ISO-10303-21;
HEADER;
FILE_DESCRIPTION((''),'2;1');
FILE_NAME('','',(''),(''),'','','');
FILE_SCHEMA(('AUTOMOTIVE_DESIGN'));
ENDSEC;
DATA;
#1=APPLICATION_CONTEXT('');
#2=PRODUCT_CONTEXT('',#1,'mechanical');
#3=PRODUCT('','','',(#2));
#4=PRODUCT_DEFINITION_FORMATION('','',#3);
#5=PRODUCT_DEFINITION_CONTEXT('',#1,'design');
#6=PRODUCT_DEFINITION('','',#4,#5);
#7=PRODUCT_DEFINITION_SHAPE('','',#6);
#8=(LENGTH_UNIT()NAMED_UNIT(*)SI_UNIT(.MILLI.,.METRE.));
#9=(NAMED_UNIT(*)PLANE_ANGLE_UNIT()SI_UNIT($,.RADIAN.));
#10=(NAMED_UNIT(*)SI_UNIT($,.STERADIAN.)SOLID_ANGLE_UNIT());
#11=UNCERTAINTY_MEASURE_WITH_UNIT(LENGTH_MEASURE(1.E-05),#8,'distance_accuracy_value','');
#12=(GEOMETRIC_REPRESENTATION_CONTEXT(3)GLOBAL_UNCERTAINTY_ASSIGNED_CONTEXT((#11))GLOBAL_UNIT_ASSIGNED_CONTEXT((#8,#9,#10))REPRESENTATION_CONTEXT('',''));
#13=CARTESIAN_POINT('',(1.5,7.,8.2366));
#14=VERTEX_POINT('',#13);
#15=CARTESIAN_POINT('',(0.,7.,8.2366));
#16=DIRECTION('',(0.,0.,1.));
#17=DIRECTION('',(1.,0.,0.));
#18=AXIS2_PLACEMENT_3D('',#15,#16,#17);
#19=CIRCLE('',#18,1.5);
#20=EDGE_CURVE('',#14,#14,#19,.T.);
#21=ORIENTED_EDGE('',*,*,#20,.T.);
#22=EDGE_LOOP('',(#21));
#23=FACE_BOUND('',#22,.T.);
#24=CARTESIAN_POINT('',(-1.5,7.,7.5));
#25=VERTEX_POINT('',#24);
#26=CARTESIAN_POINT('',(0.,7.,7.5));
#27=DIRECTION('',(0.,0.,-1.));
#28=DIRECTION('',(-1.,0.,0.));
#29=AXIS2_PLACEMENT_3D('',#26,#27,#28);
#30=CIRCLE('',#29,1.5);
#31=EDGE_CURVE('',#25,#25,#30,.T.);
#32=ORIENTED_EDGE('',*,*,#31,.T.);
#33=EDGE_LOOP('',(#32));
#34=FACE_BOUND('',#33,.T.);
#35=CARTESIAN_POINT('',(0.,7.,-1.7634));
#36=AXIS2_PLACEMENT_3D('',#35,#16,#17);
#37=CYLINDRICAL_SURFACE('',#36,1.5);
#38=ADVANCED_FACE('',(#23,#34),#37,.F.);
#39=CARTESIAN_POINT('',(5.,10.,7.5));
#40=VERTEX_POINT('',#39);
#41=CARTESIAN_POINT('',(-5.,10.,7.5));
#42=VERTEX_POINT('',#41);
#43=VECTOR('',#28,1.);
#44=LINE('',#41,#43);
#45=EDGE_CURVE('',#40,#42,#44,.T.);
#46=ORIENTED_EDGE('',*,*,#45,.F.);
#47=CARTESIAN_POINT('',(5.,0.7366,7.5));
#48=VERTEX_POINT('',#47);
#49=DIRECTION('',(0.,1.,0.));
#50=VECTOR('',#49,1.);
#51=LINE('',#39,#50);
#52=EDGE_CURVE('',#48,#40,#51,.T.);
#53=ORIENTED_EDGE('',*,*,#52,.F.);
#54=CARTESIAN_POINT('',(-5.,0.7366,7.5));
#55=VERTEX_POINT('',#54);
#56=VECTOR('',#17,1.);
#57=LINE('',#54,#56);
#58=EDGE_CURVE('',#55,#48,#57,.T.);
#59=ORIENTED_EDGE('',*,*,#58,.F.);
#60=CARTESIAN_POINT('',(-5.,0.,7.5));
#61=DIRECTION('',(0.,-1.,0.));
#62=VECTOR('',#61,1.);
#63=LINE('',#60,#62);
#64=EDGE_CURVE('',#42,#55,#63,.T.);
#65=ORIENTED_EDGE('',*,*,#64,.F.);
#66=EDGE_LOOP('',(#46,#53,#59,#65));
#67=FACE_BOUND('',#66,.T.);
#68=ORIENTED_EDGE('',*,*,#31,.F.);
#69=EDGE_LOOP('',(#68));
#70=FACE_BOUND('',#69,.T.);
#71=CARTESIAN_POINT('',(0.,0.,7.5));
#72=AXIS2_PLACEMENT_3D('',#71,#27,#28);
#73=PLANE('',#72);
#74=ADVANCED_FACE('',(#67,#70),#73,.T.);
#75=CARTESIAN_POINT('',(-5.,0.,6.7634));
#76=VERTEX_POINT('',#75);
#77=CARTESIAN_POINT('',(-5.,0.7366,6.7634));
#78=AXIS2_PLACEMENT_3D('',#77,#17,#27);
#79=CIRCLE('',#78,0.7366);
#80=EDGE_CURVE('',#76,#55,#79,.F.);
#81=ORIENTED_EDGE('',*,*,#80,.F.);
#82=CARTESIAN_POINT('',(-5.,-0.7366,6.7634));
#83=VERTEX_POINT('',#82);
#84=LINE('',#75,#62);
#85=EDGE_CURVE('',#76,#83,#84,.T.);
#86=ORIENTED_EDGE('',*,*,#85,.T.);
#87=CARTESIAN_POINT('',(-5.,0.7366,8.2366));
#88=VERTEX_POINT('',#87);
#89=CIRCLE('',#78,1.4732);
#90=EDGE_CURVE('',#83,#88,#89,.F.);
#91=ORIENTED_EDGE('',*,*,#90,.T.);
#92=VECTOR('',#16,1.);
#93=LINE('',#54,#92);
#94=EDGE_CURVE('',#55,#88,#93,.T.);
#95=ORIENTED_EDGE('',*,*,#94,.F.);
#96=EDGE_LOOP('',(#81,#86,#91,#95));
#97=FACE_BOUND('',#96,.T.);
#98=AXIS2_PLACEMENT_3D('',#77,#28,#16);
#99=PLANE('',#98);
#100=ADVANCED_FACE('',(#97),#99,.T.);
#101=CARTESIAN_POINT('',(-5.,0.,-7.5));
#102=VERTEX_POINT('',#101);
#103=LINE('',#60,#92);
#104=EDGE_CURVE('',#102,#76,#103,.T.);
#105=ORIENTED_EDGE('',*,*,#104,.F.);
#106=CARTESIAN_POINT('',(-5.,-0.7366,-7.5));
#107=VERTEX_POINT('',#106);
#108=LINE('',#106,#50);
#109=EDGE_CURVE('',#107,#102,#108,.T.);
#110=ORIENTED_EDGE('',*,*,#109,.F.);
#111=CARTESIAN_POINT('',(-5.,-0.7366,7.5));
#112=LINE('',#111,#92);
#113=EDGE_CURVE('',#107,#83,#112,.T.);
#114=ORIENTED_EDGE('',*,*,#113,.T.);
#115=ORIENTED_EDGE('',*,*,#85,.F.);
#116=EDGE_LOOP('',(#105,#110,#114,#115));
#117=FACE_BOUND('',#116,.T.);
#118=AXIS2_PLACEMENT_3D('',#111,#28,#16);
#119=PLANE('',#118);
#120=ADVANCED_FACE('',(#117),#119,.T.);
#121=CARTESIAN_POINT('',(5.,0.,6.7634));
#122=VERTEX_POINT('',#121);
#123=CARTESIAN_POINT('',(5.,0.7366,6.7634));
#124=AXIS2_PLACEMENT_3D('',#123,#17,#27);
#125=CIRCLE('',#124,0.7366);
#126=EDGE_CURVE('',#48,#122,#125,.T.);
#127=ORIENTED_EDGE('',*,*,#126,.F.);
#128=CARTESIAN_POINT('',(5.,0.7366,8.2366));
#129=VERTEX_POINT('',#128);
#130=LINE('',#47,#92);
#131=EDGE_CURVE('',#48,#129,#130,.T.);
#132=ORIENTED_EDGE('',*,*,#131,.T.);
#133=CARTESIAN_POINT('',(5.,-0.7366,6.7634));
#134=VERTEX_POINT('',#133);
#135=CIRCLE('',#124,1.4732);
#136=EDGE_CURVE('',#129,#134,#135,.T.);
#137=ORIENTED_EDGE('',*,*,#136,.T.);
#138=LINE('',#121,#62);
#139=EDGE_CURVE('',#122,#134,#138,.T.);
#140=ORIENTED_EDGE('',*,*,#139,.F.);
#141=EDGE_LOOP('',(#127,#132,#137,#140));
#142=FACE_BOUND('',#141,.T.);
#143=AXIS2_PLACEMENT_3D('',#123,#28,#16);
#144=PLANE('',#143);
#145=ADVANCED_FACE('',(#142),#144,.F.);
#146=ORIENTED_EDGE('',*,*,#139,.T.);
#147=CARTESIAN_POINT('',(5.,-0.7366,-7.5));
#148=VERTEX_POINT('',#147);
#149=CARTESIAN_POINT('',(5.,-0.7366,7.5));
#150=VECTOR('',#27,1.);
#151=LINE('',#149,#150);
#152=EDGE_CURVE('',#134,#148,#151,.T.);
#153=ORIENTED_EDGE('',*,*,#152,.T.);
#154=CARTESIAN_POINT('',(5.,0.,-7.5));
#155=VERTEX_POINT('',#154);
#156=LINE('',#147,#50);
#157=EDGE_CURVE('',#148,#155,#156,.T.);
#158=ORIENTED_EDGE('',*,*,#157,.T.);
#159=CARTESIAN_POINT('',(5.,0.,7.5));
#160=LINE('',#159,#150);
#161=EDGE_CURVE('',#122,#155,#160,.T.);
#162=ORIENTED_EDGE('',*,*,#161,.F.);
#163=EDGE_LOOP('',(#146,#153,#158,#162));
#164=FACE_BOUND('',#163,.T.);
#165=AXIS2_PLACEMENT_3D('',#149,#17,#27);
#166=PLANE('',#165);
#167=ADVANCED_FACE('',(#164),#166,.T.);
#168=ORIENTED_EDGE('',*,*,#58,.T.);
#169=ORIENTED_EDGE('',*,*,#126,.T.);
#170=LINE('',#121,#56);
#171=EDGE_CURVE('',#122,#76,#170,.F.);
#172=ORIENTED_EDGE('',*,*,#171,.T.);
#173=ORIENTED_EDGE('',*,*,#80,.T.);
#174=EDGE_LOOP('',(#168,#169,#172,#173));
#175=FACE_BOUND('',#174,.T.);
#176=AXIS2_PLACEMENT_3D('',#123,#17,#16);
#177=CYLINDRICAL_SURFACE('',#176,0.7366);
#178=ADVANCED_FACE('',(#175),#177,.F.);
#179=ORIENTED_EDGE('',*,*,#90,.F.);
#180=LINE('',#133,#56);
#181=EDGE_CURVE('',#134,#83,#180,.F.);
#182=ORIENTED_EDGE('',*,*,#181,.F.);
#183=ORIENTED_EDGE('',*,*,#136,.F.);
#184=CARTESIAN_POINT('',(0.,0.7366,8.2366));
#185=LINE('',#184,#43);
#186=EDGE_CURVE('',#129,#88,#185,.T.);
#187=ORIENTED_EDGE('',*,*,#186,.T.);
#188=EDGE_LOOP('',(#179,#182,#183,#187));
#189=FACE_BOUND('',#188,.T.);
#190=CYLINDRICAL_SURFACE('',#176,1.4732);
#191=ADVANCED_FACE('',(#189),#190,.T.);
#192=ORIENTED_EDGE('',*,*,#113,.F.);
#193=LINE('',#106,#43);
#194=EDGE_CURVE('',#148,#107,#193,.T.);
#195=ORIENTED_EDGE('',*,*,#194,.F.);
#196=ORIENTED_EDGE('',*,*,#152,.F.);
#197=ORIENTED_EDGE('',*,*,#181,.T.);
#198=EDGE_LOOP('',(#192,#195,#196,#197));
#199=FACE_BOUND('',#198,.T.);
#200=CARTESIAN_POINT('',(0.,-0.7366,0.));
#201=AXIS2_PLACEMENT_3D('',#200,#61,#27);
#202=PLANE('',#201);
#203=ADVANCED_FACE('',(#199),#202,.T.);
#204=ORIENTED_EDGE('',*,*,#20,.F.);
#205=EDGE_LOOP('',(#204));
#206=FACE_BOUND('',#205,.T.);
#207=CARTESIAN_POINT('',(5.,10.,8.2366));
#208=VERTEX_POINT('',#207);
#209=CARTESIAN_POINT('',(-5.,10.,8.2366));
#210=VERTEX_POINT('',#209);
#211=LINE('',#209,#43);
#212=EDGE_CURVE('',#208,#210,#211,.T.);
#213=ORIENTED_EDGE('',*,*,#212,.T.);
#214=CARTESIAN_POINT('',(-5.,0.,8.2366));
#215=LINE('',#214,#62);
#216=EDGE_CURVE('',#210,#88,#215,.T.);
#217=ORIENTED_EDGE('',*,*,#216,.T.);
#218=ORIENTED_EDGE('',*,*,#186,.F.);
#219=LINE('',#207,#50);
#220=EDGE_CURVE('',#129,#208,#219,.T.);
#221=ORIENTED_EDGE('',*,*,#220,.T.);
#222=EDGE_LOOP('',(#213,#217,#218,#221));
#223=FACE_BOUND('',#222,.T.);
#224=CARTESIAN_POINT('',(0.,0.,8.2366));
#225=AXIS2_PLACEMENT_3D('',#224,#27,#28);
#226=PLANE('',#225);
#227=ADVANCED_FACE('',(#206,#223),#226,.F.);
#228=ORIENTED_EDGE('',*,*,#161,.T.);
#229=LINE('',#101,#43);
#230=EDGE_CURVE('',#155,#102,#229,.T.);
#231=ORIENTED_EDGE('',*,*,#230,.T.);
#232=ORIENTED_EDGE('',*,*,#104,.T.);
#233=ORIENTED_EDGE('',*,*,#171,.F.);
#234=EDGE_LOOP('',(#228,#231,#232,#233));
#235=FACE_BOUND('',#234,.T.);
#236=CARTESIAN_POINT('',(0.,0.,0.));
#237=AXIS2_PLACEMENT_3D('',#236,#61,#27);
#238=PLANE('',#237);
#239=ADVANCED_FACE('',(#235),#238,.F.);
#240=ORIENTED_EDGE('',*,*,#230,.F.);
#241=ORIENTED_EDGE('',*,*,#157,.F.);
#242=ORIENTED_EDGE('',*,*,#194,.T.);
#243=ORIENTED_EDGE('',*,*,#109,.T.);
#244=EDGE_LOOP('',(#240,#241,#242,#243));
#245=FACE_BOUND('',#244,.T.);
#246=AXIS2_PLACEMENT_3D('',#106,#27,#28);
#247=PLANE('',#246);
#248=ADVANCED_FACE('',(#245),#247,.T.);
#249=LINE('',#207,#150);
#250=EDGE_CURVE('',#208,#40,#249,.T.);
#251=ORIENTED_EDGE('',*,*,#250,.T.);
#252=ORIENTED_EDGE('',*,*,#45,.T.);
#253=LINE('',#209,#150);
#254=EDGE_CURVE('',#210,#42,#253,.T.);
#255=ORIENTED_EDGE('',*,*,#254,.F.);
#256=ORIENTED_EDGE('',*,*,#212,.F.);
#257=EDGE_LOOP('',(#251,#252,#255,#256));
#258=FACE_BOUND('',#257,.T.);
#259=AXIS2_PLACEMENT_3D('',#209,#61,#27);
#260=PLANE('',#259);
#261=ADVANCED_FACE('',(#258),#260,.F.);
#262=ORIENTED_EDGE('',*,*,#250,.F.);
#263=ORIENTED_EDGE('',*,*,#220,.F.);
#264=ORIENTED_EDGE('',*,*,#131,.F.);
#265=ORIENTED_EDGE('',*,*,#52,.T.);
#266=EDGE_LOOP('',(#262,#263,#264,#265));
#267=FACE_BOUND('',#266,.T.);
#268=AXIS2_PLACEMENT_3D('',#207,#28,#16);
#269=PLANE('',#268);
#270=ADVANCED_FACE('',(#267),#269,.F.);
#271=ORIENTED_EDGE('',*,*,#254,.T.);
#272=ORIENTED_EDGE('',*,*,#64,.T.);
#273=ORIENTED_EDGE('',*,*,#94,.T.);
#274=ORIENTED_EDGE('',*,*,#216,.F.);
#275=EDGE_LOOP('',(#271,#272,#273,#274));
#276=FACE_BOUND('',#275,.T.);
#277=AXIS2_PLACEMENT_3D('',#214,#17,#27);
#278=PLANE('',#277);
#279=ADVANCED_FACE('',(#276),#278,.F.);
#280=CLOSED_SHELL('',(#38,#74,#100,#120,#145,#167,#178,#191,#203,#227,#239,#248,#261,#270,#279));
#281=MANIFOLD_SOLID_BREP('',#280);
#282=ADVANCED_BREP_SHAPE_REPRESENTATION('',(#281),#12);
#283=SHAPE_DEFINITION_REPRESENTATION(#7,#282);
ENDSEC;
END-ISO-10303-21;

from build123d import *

# Parameters (mm, degrees)
CROQUIS1_W                       = 10
CROQUIS1_H                       = 15
BRIDA_BASE1_DEPTH                = 0.7366
BRIDA_DE_ARISTA1_STRIP_W         = 4.4196
BRIDA_DE_ARISTA1_STRIP_H         = 0.7366
BRIDA_DE_ARISTA1_STRIP_CUT_DEPTH = 10
BRIDA_DE_ARISTA1_DEPTH           = 10
CROQUIS7_R                       = 1.5
CORTAR_EXTRUIR1_DEPTH            = 10


# Sheet-metal steps are written as plain solids
with BuildPart() as part:
    # Croquis1 → Brida base1 (new body)
    with BuildSketch(Plane(origin=(0, 0, 0), x_dir=(1, 0, 0), z_dir=(0, 1, 0))):
        Rectangle(CROQUIS1_W, CROQUIS1_H)
    extrude(amount=-BRIDA_BASE1_DEPTH)

    # Brida de arista1 strip (across the edge) → Brida de arista1 strip cut (cut)
    with BuildSketch(Plane(origin=(-5, 0, 7.5), x_dir=(0, 0, -1), z_dir=(1, 0, 0))):
        with Locations((-1.4732, -0.3683)):
            Rectangle(BRIDA_DE_ARISTA1_STRIP_W, BRIDA_DE_ARISTA1_STRIP_H)
    extrude(amount=BRIDA_DE_ARISTA1_STRIP_CUT_DEPTH, mode=Mode.SUBTRACT)

    # Brida de arista1 section (across the edge) → Brida de arista1 (add)
    with BuildSketch(Plane(origin=(-5, 0, 7.5), x_dir=(0, 0, -1), z_dir=(1, 0, 0))):
        with BuildLine():
            Line((-0.7366, 0.7366), (-0.7366, 10))
            Line((-0.7366, 10), (0, 10))
            Line((0, 10), (0, 0.7366))
            ThreePointArc((0, 0.7366), (0.215745145, 0.215745145), (0.7366, 0))
            Line((0.7366, 0), (0.7366, -0.7366))
            ThreePointArc((0.7366, -0.7366), (-0.30510971, -0.30510971), (-0.7366, 0.7366))
        make_face()
    extrude(amount=BRIDA_DE_ARISTA1_DEPTH)

    # Croquis7 → Cortar-Extruir1 (cut)
    with BuildSketch(Plane.XY.offset(8.2366)):
        with Locations((0, 7)):
            Circle(CROQUIS7_R)
    extrude(amount=-CORTAR_EXTRUIR1_DEPTH, mode=Mode.SUBTRACT)


solid = part.part
